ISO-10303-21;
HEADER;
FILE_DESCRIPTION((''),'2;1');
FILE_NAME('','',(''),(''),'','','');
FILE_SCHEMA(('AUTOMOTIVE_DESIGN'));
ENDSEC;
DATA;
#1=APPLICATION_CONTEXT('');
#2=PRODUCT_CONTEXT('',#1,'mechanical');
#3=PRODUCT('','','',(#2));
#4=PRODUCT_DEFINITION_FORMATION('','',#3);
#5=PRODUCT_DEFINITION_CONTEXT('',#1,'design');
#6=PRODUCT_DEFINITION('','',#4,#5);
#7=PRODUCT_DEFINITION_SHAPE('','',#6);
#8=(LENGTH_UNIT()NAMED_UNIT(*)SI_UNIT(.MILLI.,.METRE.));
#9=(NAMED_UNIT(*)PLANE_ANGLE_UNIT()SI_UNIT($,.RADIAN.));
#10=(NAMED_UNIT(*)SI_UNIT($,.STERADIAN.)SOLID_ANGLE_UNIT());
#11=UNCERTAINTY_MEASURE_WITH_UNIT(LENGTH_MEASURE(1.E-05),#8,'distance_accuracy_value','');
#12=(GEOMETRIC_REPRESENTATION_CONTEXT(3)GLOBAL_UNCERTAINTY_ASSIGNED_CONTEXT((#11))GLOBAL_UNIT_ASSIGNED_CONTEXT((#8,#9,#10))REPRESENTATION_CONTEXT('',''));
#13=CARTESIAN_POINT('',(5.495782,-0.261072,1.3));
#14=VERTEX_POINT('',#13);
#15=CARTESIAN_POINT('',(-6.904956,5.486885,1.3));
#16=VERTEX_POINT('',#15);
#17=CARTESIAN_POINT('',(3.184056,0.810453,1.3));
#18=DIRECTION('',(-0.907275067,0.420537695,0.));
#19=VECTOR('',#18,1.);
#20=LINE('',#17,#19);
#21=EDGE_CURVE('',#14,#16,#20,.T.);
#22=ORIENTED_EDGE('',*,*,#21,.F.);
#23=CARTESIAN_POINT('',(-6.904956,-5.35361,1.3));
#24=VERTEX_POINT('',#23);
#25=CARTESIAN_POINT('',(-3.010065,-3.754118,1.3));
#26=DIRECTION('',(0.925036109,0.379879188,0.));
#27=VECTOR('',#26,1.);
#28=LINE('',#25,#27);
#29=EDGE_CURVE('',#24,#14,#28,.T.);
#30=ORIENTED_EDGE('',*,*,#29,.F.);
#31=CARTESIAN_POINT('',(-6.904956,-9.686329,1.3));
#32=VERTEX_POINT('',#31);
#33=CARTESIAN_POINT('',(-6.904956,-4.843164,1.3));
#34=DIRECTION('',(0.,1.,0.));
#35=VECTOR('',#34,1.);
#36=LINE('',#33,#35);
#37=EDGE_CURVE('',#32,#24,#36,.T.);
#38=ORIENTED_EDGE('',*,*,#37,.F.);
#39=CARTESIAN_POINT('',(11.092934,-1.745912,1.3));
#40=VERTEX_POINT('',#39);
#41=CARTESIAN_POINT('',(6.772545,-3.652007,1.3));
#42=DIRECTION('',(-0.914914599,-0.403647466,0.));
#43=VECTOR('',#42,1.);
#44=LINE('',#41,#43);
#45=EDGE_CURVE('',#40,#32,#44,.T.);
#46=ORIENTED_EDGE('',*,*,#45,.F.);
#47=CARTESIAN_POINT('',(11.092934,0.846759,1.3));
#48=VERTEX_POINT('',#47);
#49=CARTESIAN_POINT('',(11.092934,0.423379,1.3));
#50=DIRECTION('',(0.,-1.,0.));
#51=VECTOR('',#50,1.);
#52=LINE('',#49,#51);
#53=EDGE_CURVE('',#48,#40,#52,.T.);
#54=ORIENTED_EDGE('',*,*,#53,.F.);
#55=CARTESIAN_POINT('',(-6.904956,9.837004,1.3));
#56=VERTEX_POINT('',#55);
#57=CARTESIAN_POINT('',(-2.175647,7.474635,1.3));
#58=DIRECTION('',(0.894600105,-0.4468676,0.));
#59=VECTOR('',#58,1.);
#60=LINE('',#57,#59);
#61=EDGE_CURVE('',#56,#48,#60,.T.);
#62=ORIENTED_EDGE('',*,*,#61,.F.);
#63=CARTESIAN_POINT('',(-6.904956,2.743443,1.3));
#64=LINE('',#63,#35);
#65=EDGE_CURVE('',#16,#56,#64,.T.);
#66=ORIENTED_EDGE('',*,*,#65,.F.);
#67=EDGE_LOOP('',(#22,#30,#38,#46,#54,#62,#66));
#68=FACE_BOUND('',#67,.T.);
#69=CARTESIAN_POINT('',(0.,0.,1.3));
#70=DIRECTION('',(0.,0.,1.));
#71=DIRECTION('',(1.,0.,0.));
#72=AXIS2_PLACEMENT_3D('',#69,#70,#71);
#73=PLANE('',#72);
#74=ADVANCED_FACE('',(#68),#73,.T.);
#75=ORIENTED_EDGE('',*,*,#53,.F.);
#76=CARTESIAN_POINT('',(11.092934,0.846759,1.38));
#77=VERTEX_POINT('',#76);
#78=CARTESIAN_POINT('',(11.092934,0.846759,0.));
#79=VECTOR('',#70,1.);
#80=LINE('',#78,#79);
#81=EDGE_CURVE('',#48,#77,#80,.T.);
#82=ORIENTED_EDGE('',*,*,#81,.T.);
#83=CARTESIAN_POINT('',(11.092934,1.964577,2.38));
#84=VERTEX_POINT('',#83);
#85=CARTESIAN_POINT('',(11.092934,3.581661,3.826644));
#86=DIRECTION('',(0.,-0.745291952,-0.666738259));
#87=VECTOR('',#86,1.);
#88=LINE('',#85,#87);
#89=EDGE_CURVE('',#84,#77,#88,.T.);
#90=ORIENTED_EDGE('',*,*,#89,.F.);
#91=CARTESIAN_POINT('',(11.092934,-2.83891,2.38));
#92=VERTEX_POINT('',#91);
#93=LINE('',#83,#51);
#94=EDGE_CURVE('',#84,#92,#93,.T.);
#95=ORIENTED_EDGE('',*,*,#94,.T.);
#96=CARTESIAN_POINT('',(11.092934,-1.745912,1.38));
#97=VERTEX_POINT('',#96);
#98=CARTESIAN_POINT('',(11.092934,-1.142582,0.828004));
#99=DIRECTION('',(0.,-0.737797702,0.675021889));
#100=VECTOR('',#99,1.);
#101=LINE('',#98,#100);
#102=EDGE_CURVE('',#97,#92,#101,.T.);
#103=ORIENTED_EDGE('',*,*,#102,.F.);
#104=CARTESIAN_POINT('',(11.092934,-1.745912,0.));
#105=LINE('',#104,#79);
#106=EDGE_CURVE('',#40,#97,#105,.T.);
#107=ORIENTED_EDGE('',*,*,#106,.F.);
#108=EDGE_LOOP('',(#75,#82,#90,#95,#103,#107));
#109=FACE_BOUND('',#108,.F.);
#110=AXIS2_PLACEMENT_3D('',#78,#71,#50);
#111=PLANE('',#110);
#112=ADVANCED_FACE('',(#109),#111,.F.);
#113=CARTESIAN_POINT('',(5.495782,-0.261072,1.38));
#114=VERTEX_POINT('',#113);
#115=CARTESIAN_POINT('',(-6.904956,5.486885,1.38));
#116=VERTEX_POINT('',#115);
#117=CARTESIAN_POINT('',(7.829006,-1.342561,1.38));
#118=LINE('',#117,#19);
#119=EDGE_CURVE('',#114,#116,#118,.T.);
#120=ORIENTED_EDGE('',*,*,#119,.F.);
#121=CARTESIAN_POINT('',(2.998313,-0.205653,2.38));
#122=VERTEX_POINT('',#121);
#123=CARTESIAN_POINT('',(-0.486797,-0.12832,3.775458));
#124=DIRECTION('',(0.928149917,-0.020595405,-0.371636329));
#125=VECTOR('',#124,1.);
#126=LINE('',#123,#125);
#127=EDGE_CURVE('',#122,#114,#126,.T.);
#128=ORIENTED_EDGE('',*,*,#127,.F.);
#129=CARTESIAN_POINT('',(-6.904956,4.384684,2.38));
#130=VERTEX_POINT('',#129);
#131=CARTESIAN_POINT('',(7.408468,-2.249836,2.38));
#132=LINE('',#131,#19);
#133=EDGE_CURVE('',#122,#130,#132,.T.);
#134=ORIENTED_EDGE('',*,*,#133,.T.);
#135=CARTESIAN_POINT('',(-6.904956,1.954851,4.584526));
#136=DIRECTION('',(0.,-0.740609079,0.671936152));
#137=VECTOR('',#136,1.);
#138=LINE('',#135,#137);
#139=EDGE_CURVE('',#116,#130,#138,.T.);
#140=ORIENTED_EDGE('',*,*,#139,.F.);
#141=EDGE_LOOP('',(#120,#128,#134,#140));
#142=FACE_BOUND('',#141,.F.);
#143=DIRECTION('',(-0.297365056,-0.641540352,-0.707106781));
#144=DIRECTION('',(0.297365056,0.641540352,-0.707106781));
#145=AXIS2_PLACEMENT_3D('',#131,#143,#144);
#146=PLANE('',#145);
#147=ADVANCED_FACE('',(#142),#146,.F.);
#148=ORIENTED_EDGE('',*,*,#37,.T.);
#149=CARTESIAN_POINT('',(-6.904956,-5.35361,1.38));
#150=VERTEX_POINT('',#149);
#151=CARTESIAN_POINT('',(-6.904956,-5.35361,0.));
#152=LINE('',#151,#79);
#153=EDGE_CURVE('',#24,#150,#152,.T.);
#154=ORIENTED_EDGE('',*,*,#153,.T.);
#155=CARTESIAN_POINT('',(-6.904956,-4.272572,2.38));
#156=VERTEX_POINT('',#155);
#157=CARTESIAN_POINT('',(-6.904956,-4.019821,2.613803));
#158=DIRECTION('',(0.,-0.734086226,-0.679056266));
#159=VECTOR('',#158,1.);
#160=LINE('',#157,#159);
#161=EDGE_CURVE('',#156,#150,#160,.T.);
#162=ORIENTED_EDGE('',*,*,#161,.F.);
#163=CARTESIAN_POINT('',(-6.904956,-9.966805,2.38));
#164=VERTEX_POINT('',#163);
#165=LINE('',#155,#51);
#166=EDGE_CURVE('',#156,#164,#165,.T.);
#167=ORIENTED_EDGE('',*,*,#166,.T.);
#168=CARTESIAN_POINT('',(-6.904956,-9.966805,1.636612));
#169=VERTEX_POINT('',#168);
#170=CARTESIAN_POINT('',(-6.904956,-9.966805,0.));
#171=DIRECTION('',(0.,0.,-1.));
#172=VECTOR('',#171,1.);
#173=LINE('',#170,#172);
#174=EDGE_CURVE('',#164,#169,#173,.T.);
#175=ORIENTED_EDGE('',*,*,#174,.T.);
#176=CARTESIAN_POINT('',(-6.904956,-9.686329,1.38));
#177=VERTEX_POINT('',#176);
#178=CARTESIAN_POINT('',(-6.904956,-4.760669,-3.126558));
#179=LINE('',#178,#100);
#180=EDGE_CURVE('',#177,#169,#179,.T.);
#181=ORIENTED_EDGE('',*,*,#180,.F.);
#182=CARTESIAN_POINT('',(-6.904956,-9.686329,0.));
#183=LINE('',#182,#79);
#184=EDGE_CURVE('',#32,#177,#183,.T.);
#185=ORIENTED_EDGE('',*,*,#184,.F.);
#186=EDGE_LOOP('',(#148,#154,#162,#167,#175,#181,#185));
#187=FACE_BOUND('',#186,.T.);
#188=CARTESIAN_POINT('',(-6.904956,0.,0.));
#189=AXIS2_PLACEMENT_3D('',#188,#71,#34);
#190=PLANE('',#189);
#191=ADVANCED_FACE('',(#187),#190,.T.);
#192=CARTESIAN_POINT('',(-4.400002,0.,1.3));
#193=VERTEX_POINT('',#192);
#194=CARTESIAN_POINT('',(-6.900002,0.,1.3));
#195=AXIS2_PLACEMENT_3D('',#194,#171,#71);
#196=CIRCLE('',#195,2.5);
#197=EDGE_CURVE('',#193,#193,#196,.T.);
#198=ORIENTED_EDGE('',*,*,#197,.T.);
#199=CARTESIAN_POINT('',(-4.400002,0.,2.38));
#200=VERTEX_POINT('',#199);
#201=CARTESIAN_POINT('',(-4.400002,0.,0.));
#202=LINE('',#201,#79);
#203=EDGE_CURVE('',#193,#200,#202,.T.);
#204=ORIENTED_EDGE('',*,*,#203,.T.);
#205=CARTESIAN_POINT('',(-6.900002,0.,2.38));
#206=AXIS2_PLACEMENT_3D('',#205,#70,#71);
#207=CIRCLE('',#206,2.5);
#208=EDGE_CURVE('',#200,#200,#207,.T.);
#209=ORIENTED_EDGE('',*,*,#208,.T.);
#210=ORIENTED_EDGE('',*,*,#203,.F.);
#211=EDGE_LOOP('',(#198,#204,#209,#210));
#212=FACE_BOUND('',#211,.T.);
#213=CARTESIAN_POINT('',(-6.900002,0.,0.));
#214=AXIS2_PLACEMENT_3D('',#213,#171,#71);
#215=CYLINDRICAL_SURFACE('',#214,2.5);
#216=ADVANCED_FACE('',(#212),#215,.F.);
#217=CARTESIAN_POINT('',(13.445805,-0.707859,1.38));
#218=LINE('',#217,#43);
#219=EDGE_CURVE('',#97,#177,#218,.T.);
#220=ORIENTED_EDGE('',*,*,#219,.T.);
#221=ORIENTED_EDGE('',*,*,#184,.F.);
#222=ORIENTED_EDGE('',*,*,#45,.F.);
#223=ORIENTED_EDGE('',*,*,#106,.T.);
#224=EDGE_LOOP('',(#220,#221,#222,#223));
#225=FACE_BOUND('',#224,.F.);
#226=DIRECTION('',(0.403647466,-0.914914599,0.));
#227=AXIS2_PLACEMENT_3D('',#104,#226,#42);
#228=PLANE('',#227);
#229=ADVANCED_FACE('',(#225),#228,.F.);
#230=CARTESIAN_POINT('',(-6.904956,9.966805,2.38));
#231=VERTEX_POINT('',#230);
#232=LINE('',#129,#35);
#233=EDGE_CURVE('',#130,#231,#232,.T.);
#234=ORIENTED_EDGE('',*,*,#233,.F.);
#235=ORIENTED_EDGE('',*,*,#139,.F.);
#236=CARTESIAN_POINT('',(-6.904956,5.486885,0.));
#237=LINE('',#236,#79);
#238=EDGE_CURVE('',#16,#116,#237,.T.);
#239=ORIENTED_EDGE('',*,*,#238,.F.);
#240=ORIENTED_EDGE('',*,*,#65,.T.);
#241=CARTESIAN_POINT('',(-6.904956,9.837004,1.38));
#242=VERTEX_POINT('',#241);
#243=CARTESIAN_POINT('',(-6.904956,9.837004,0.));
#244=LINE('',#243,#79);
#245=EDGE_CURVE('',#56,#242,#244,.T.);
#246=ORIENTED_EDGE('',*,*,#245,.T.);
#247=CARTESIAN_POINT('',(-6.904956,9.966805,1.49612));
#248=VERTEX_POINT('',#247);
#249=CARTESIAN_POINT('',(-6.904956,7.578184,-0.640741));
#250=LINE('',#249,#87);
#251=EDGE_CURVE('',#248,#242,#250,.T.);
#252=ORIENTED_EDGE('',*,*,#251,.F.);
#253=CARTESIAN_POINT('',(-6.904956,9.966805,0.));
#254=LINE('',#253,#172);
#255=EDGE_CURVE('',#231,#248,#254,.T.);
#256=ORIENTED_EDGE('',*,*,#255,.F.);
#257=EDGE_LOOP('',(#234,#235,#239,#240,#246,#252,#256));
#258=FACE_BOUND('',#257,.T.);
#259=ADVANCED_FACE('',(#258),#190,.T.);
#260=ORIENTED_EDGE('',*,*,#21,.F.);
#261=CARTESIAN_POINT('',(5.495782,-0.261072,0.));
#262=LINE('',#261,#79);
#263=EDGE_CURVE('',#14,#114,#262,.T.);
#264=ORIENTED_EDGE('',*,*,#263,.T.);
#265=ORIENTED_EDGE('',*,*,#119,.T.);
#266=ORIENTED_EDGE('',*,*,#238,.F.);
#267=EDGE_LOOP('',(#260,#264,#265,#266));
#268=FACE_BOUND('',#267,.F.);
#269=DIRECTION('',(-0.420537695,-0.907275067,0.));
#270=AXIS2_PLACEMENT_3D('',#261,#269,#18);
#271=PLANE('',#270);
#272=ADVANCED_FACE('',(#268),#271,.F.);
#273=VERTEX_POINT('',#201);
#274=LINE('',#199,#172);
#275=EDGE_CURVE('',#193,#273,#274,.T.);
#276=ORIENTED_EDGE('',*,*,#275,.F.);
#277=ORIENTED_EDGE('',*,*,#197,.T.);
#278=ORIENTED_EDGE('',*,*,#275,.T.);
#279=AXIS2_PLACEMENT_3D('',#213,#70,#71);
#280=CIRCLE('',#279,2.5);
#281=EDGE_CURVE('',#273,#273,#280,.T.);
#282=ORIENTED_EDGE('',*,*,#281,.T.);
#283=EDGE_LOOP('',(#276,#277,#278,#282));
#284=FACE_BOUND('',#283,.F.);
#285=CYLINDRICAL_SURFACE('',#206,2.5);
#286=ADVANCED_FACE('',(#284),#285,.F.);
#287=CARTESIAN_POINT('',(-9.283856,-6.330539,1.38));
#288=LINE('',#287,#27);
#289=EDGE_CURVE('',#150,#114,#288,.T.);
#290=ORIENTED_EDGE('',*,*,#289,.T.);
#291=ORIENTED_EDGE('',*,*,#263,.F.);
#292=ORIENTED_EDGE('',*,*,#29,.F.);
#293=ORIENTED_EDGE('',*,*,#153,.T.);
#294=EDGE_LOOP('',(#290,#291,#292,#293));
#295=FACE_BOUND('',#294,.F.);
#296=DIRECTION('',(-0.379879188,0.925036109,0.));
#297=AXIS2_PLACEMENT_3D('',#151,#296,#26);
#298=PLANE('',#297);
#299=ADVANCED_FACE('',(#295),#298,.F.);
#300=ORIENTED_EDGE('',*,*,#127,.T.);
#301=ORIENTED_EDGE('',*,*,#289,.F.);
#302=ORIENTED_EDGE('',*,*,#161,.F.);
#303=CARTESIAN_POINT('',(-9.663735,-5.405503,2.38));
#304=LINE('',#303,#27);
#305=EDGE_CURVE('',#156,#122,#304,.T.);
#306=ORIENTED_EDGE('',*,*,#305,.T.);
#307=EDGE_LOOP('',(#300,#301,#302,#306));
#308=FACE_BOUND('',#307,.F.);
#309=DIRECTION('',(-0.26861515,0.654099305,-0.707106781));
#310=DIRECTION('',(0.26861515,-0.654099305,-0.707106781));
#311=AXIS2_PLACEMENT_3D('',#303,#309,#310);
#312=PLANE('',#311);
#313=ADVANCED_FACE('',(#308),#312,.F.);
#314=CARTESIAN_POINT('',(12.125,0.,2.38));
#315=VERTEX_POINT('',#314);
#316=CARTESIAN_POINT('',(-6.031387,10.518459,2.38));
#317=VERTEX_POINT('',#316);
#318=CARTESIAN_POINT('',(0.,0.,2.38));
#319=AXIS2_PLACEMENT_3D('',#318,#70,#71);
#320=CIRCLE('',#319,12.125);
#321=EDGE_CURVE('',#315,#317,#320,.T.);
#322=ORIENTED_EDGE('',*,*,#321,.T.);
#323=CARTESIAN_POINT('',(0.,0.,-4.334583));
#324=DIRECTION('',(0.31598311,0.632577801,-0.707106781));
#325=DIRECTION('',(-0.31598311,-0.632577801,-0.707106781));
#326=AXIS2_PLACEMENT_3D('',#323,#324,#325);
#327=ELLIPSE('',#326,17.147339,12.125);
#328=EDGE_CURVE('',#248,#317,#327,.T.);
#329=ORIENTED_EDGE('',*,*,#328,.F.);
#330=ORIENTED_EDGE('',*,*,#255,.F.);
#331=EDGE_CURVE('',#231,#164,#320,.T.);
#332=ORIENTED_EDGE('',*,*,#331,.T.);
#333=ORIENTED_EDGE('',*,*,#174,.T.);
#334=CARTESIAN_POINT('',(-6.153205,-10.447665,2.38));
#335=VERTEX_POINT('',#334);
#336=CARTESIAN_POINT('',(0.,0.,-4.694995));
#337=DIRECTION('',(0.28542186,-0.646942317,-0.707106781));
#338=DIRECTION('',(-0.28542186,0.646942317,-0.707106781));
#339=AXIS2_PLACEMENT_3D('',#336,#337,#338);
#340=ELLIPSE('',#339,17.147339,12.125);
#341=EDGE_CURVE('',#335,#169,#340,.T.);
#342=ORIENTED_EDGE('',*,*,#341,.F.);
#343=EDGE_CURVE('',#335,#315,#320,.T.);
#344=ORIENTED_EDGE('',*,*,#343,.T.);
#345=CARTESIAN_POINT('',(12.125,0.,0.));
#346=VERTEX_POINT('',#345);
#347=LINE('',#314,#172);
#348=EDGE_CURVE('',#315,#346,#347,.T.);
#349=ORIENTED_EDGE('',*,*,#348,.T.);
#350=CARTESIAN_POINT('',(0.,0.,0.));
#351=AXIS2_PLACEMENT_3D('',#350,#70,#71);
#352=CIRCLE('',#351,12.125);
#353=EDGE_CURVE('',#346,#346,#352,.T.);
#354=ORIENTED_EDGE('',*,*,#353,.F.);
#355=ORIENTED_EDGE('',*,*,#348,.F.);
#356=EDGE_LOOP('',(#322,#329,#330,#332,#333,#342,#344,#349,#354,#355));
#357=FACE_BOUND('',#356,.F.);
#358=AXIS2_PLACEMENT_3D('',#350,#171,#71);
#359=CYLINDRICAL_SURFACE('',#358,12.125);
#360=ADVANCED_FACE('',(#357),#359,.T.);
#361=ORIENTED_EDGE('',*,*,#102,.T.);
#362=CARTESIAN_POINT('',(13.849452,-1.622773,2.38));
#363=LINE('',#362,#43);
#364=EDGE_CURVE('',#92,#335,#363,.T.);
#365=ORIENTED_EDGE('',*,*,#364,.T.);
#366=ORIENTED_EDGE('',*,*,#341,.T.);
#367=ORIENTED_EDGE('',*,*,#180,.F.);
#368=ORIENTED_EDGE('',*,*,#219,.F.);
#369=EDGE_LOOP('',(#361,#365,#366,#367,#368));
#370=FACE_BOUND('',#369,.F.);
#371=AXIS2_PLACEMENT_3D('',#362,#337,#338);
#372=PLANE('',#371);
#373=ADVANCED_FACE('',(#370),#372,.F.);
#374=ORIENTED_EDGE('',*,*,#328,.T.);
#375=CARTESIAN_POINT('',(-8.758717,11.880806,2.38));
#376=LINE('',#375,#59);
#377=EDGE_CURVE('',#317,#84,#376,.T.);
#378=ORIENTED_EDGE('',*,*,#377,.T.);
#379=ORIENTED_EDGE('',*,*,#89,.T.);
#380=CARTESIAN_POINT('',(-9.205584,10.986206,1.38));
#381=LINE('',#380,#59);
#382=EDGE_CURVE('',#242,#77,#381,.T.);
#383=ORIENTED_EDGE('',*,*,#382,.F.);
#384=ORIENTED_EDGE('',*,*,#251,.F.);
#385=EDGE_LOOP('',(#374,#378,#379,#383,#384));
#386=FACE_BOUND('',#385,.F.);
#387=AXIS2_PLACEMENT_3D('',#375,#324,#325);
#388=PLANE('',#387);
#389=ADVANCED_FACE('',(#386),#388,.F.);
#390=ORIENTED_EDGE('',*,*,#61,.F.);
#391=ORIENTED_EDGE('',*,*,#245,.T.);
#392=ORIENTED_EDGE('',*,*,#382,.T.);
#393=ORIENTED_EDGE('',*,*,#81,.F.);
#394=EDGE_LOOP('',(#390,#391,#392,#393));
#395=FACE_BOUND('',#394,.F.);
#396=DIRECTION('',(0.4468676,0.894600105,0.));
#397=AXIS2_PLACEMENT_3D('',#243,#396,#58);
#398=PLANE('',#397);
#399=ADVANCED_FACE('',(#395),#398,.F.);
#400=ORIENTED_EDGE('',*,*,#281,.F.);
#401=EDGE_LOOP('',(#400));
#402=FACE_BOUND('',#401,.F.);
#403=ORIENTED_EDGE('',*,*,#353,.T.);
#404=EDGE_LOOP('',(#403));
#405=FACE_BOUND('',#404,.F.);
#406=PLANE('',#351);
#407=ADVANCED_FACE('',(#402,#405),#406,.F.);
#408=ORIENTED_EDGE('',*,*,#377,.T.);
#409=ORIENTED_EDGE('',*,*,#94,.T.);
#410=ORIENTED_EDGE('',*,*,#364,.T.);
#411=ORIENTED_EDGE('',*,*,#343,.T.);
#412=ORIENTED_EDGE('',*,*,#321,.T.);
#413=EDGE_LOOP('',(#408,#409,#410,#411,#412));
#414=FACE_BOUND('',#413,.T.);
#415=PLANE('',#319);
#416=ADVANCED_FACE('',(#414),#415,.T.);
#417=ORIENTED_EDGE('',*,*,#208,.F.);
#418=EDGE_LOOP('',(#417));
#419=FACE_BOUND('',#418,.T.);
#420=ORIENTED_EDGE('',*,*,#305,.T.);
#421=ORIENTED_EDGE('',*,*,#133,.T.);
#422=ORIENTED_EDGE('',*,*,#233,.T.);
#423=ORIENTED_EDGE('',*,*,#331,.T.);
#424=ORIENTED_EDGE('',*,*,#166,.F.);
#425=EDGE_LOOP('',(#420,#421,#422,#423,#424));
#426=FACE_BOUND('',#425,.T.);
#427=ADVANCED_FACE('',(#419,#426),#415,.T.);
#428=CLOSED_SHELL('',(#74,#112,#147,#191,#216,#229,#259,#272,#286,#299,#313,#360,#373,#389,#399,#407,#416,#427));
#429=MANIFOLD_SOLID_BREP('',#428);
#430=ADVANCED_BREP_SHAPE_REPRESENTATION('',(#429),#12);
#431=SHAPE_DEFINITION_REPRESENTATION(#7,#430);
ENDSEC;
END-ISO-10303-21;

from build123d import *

# Parameters (mm, degrees)
F0_R         = 12.125
F0_R_2       = 2.5
F1_DEPTH     = 2.38
F2_R         = 12.125
F3_DEPTH     = 1.3
F4_T4_DEPTH  = 25.2617303144
F4_T10_DEPTH = 18.811479046
F4_T15_DEPTH = 18.5490461255
F4_T20_DEPTH = 24.8150280867
F5_R         = 2.5
F6_DEPTH     = 25


# Not quite as in the source:
# - a fillet or chamfer that OpenCascade refuses, or shapes differently, is made with other operations: its cross-section is extruded or revolved along the edge and cut away or added


with BuildPart() as f1:
    # F0 (on Top) → F1 (new body)
    with BuildSketch(Plane.XY):
        Circle(F0_R)
        with Locations((-6.9000022486, 0)):
            Circle(F0_R_2, mode=Mode.SUBTRACT)
        Polygon((-6.9049564988, -9.6863286317), (-6.9049564988, -5.3536104666), (5.4957817031, -0.2610715792), (-6.9049564988, 5.4868851832), (-6.9049564988, 9.8370038228), (11.0929343528, 0.8467586343), (11.0929343528, -1.7459120749), align=None, mode=Mode.SUBTRACT)
    extrude(amount=F1_DEPTH)

    # F2 (on Top) → F3 (join)
    with BuildSketch(Plane.XY):
        Circle(F2_R)
    extrude(amount=F3_DEPTH)

    # F4: chamfer of 1 on 4 edges, made by hand


with BuildPart() as f4_tool2:
    # F4_s3 → F4_t4 (new body)
    with BuildSketch(Plane(origin=(-11.7592465012, 5.8739387937, 0), x_dir=(0, 0, 1), z_dir=(0.8946001051, -0.4468676, 0))):
        Polygon((2.38, -6.7145833148), (1.38, -5.7145833148), (2.38, -5.7145833148), align=None)
    extrude(amount=F4_T4_DEPTH)

    split(bisect_by=Plane.YZ.offset(11.0929343528), keep=Keep.BOTTOM)

    split(bisect_by=Plane.YZ.offset(-6.9049564988), keep=Keep.TOP)


with BuildPart() as f1_1:
    add(f1.part)

    # F4_t1: cut F4_tool2
    add(f4_tool2.part, mode=Mode.SUBTRACT)


with BuildPart() as f4_tool8:
    # F4_s9 → F4_t10 (new body)
    with BuildSketch(Plane(origin=(6.9566759614, -3.2245396996, 0), x_dir=(0, 0, 1), z_dir=(-0.907275067, 0.4205376948, 0))):
        Polygon((2.38, 1.0743196339), (1.38, 2.0743196339), (2.38, 2.0743196339), align=None)
    extrude(amount=F4_T10_DEPTH)

    split(bisect_by=Plane.YZ.offset(-6.9049564988), keep=Keep.TOP)


with BuildPart() as f1_2:
    add(f1_1.part)

    # F4_t7: cut F4_tool8
    add(f4_tool8.part, mode=Mode.SUBTRACT)


with BuildPart() as f4_tool13:
    # F4_s14 → F4_t15 (new body)
    with BuildSketch(Plane(origin=(-10.1686835399, -4.1759140075, 0), x_dir=(0, 0, 1), z_dir=(0.9250361088, 0.3798791878, 0))):
        Polygon((2.38, 1.3292337276), (1.38, 2.3292337276), (2.38, 2.3292337276), align=None)
    extrude(amount=F4_T15_DEPTH)

    split(bisect_by=Plane.YZ.offset(-6.9049564988), keep=Keep.TOP)


with BuildPart() as f1_3:
    add(f1_2.part)

    # F4_t12: cut F4_tool13
    add(f4_tool13.part, mode=Mode.SUBTRACT)


with BuildPart() as f4_tool18:
    # F4_s19 → F4_t20 (new body)
    with BuildSketch(Plane(origin=(10.9936482118, 4.8502431202, 0), x_dir=(0, 0, 1), z_dir=(-0.914914599, -0.4036474657, 0))):
        Polygon((2.38, -7.0749952843), (1.38, -6.0749952843), (2.38, -6.0749952843), align=None)
    extrude(amount=F4_T20_DEPTH)

    split(bisect_by=Plane.YZ.offset(11.0929343528), keep=Keep.BOTTOM)

    split(bisect_by=Plane.YZ.offset(-6.9049564988), keep=Keep.TOP)


with BuildPart() as f1_4:
    add(f1_3.part)

    # F4_t17: cut F4_tool18
    add(f4_tool18.part, mode=Mode.SUBTRACT)

    # F5 (on face) → F6 (cut)
    with BuildSketch(Plane.XY.offset(2.38)):
        with Locations((-6.9000022486, 0)):
            Circle(F5_R)
    extrude(amount=-F6_DEPTH, mode=Mode.SUBTRACT)


solid = f1_4.part
